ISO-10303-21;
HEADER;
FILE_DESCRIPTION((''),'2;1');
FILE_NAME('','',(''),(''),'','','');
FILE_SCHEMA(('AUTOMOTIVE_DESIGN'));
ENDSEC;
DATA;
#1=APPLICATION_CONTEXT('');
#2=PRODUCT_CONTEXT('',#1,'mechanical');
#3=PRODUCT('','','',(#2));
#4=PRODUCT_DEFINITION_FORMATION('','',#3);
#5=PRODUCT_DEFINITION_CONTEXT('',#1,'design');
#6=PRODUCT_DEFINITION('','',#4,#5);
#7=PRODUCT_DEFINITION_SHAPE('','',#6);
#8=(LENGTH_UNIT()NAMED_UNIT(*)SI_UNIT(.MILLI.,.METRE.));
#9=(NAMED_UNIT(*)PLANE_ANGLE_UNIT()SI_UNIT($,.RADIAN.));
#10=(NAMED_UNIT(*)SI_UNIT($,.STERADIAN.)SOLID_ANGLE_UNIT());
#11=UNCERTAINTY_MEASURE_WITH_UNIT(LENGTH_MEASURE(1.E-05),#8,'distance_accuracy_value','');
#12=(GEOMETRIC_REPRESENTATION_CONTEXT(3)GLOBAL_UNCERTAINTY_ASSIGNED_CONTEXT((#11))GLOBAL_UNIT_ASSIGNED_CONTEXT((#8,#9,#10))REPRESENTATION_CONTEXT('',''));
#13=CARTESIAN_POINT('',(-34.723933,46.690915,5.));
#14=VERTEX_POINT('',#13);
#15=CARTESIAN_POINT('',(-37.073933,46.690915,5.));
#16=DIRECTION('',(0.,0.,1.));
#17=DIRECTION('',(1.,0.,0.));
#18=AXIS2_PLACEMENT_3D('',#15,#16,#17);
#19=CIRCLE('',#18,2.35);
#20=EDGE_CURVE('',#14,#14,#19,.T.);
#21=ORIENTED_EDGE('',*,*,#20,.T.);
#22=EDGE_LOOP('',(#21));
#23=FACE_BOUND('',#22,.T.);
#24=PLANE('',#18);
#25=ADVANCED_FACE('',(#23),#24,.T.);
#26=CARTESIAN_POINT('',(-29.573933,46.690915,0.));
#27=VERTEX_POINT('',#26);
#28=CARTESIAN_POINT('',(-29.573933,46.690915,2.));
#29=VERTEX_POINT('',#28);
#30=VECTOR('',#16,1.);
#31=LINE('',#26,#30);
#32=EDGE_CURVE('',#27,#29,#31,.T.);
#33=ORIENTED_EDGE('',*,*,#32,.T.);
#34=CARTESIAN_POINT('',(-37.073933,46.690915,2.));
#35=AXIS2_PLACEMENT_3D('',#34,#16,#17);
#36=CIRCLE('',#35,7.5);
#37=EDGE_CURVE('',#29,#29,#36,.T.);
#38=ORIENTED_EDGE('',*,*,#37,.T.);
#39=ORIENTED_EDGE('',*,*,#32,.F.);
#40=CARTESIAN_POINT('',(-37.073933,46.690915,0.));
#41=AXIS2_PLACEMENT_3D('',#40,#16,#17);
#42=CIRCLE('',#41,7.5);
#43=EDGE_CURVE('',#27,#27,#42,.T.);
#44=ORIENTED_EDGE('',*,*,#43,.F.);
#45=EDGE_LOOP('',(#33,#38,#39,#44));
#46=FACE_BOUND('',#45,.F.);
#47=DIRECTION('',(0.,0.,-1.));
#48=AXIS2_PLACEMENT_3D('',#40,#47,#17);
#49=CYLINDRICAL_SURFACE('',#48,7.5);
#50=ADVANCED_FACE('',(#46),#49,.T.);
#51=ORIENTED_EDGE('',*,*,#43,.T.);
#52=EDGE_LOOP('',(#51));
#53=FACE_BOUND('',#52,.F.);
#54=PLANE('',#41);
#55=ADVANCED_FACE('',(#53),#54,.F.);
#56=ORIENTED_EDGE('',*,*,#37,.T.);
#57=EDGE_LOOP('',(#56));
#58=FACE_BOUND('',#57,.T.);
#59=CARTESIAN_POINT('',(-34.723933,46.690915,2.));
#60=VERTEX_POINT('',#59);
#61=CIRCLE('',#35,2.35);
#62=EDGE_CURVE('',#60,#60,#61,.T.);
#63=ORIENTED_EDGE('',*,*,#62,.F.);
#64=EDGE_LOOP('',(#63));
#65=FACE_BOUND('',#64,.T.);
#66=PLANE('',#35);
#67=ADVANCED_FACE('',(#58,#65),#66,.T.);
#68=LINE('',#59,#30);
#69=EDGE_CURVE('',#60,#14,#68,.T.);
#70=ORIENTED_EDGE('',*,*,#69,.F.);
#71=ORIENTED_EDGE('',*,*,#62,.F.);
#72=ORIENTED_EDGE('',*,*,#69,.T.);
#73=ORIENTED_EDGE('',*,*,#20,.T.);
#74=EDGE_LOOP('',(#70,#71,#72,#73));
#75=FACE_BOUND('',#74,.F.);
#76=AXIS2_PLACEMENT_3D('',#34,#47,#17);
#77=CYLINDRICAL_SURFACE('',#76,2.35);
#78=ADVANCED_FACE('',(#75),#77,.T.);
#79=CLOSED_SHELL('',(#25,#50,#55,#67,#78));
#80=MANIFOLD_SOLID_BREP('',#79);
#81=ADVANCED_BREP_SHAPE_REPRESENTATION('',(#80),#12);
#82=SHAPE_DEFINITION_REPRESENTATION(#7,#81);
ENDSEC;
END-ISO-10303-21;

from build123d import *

# Parameters (mm, degrees)
F0_R     = 7.5
F1_DEPTH = 2
F2_R     = 2.35
F3_DEPTH = 3


# Not quite as in the source:
# - a feature names something its author has since deleted; it is built from what else it names


with BuildPart() as f1:
    # F0 (on Top) → F1 (new body)
    with BuildSketch(Plane.XY):
        with Locations((-37.0739325881, 46.6909147799)):
            Circle(F0_R)
    extrude(amount=F1_DEPTH)

    # F2 (on face) → F3 (join)
    with BuildSketch(Plane.XY.offset(2)):
        with Locations((-37.0739325881, 46.6909147799)):
            Circle(F2_R)
    extrude(amount=F3_DEPTH)


solid = f1.part
